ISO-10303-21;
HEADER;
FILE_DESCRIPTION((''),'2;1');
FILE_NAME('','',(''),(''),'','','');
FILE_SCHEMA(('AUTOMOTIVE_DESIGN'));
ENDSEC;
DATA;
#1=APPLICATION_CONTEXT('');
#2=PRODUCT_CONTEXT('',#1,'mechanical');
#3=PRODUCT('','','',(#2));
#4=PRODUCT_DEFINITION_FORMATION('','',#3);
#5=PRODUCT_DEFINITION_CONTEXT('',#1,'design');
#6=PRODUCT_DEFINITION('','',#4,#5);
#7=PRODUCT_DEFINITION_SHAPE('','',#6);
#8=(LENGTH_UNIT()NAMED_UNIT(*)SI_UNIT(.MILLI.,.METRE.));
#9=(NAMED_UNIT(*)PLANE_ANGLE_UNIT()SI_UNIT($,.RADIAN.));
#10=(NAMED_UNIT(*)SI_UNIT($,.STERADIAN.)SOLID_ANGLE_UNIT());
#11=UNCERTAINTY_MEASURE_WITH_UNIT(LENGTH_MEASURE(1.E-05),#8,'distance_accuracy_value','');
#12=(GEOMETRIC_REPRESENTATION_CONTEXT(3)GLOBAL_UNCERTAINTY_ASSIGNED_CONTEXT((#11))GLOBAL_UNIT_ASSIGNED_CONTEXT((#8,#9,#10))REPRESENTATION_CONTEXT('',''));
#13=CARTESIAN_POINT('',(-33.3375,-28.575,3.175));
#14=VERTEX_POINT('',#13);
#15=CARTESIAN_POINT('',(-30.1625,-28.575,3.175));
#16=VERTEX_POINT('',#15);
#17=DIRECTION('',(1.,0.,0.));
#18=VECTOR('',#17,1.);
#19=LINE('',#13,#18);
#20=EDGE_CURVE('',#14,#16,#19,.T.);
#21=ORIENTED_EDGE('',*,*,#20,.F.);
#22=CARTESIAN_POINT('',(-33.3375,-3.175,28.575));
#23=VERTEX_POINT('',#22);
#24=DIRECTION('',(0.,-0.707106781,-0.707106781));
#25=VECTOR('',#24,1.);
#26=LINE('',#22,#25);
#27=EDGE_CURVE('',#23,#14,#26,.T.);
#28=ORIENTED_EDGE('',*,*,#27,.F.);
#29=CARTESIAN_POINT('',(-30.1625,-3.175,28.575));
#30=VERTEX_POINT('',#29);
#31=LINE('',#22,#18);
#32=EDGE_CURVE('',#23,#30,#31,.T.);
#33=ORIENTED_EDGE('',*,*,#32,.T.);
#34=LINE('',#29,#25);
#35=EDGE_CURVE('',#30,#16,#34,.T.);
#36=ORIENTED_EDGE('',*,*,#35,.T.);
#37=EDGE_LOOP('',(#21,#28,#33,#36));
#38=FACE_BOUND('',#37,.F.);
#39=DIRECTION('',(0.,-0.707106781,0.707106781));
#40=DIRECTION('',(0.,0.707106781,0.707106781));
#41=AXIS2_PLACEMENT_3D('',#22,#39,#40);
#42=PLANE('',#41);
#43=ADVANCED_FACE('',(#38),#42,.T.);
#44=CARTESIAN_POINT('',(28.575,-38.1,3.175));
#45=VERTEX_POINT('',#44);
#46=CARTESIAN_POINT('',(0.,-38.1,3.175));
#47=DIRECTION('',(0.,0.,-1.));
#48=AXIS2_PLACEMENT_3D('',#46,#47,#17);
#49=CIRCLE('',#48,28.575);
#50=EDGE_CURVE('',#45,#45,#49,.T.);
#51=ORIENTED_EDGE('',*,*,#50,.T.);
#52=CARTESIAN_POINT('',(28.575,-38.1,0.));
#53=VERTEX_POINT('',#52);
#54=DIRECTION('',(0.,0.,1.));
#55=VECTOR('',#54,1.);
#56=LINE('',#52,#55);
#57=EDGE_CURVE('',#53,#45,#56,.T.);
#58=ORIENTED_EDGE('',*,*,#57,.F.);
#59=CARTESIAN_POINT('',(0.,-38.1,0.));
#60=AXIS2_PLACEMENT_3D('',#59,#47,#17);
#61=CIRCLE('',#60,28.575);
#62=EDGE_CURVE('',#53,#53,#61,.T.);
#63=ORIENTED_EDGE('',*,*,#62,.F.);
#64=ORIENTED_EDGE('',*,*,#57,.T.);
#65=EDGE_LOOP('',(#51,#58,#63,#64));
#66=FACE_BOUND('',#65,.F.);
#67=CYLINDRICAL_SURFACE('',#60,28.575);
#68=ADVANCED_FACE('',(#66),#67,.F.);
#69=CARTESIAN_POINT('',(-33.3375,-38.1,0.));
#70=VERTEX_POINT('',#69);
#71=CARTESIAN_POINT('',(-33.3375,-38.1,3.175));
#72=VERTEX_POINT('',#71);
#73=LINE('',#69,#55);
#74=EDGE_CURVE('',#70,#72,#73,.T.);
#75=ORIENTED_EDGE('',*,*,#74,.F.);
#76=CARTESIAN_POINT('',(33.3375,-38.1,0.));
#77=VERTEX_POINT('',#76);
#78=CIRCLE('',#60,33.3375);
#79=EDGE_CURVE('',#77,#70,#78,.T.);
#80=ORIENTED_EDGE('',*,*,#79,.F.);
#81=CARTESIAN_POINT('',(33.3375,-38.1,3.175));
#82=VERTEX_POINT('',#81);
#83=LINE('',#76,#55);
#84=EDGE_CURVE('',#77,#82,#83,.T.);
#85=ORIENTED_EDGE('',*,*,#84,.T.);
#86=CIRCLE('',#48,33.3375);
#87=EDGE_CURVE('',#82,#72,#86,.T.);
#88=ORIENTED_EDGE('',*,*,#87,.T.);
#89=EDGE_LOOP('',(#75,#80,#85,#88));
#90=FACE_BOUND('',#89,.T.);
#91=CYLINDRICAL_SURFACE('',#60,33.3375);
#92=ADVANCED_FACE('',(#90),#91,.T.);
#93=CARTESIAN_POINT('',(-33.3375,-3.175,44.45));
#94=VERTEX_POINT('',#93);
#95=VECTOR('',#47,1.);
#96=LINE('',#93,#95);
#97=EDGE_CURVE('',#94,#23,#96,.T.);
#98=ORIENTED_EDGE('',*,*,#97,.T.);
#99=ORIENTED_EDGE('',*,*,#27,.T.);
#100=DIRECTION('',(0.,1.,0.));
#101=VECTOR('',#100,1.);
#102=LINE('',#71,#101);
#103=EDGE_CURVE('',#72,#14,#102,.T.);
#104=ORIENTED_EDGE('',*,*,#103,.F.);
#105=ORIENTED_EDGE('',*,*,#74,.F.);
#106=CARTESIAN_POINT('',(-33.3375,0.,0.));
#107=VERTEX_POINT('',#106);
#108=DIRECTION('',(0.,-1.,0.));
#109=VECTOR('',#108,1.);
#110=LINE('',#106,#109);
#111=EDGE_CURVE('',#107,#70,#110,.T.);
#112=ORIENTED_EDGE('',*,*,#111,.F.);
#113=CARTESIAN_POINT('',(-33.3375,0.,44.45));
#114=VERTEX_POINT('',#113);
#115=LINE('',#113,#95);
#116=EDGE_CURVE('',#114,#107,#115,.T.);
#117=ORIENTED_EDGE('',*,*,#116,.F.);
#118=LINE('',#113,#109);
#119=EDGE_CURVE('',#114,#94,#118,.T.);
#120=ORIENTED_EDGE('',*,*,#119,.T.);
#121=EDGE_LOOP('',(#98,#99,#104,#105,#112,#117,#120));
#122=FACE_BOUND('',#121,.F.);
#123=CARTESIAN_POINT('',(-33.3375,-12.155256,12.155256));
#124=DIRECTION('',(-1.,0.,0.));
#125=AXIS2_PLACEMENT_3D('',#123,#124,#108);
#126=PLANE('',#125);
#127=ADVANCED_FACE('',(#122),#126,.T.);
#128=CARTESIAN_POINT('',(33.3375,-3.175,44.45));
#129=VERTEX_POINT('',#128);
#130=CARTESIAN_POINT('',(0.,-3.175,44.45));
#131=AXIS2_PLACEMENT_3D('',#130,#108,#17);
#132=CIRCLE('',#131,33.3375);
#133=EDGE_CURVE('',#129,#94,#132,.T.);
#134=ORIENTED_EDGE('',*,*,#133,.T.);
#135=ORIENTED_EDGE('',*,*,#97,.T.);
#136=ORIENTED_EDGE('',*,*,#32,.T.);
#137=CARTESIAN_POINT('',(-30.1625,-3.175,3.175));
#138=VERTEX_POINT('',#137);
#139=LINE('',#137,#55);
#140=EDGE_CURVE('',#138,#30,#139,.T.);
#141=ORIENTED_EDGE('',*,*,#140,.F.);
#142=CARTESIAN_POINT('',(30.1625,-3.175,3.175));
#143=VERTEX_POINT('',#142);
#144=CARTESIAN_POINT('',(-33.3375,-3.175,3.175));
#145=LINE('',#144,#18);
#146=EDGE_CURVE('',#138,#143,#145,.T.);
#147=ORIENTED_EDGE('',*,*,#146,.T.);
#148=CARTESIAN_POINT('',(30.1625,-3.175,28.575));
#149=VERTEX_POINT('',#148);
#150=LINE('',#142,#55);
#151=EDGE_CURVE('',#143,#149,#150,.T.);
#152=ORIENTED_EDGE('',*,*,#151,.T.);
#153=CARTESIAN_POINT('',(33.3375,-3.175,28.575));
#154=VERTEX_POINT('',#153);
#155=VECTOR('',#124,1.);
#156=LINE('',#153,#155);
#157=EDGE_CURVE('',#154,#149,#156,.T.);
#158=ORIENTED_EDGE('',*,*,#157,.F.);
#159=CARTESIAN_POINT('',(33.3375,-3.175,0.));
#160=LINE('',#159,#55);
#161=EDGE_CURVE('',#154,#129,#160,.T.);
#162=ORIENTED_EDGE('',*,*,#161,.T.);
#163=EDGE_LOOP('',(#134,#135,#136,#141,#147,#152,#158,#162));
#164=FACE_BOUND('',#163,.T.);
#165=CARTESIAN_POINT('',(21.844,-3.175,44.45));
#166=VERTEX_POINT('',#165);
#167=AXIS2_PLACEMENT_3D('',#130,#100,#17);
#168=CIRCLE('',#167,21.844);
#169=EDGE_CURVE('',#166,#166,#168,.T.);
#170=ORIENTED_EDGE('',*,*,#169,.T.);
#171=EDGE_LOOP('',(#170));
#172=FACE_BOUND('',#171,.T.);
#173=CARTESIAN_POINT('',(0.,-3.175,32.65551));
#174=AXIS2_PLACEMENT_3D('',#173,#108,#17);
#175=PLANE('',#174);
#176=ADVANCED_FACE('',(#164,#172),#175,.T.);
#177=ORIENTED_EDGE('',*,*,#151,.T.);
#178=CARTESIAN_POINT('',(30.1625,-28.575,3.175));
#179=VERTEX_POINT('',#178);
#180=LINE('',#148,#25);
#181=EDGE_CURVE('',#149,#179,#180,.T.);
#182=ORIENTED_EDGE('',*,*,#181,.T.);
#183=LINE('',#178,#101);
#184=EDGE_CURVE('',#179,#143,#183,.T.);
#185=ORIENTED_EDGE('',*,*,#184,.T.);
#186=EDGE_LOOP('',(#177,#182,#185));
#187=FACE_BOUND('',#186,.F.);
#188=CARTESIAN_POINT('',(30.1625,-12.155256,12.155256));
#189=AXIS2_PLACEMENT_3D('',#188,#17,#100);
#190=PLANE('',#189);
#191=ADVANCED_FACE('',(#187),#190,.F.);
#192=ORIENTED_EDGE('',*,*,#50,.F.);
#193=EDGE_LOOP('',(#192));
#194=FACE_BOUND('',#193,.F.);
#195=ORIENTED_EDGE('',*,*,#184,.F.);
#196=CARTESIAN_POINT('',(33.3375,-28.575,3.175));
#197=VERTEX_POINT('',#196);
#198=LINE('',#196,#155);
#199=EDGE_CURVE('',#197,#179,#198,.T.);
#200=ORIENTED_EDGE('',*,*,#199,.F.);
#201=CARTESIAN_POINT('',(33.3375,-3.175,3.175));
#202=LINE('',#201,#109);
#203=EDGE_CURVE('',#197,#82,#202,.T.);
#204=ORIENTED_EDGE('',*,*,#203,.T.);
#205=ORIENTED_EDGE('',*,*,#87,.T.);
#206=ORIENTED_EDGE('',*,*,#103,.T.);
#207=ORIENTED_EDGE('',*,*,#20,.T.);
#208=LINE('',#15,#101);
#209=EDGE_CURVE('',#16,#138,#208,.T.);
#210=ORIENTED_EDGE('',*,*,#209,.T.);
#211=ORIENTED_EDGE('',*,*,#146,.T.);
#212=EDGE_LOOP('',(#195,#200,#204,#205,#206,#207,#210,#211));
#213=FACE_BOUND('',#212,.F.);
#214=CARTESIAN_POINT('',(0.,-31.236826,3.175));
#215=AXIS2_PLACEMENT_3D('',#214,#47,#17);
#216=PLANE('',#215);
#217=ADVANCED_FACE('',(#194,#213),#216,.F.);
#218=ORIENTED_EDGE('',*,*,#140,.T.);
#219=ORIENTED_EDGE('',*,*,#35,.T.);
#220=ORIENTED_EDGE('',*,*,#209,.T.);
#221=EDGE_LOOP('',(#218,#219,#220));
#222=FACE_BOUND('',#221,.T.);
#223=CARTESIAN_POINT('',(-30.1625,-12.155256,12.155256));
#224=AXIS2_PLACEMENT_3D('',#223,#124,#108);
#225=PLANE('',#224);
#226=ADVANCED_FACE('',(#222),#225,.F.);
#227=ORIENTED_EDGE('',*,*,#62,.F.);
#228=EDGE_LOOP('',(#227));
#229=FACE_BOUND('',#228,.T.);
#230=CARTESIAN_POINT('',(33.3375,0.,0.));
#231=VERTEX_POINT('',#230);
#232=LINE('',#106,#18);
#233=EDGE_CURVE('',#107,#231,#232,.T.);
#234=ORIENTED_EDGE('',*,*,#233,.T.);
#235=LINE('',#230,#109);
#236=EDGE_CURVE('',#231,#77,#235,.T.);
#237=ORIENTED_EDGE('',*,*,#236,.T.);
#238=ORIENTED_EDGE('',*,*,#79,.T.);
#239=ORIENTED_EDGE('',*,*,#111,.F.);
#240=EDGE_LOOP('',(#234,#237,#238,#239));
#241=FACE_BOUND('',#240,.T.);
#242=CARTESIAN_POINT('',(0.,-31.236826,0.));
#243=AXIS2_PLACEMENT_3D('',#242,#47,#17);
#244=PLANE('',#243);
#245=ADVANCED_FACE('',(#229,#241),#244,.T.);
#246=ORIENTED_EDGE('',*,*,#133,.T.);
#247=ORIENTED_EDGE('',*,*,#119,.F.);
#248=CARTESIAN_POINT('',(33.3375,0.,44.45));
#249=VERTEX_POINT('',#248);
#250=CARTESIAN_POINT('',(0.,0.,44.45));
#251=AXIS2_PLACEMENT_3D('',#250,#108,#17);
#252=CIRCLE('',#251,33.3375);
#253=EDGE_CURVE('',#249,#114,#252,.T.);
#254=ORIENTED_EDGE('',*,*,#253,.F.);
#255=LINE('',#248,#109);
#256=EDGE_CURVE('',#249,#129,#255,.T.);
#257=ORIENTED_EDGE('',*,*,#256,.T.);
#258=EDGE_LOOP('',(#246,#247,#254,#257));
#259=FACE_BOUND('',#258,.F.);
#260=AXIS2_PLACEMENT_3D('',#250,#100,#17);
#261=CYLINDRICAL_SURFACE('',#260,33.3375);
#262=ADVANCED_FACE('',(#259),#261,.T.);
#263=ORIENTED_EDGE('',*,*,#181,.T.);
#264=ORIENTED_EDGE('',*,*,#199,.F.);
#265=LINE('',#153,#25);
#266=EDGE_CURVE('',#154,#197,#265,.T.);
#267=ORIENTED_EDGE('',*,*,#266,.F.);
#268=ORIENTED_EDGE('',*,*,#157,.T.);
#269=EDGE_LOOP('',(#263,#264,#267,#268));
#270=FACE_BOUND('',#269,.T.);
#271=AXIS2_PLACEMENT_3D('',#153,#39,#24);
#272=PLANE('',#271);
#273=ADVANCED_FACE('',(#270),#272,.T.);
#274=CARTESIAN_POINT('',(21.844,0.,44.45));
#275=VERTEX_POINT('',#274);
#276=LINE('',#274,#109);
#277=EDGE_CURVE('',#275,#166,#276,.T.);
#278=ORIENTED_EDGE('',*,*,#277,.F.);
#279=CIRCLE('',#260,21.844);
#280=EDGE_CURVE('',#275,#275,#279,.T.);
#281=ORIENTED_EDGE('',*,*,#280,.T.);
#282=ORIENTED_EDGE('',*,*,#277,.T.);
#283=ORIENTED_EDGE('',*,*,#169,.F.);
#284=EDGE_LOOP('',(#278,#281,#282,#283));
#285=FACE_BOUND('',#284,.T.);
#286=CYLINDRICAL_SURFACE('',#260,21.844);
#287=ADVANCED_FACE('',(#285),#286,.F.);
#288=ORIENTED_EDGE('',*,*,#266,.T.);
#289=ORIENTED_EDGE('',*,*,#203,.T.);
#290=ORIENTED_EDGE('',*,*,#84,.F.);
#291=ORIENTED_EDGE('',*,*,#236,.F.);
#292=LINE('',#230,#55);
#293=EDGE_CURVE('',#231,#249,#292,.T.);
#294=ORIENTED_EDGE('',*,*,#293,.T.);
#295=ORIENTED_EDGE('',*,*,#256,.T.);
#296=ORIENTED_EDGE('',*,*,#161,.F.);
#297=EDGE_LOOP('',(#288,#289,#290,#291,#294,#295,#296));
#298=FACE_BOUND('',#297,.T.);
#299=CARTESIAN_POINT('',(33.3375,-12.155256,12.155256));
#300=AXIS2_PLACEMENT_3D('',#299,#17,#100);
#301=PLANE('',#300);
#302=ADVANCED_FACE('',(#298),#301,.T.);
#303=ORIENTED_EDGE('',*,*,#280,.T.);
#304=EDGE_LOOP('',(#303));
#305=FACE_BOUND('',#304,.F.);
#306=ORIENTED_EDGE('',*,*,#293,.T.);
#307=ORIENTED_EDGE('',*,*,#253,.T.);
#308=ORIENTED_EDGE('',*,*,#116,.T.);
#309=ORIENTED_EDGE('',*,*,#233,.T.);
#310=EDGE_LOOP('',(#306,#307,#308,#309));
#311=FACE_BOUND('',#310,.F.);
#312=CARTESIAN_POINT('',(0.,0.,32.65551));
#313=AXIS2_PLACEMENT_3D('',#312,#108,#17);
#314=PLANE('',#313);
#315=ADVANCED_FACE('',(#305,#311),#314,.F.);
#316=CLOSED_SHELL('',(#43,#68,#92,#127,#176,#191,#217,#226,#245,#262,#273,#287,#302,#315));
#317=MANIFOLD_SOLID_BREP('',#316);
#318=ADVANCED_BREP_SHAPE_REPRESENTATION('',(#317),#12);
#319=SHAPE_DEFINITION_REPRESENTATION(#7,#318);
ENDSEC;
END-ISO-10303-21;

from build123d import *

# Parameters (mm, degrees)
F1_R     = 21.844
F2_DEPTH = 3.175
F3_R     = 28.575
F4_DEPTH = 3.175
F6_DEPTH = 3.175


# Not quite as in the source:
# - a variable given as a bare number and used for a length is read in inches; the dataset says mm whatever the document's units were


with BuildPart() as f2:
    # F1 (on Front) → F2 (new body)
    with BuildSketch(Plane.XZ):
        with BuildLine():
            Line((33.3375, 0), (33.3375, 44.45))
            ThreePointArc((33.3375, 44.45), (0, 77.7875), (-33.3375, 44.45))
            Line((-33.3375, 44.45), (-33.3375, 0))
            Line((-33.3375, 0), (33.3375, 0))
        make_face()
        with Locations((0, 44.45)):
            Circle(F1_R, mode=Mode.SUBTRACT)
    extrude(amount=F2_DEPTH)

    # F3 (on face) → F4 (join)
    with BuildSketch(Plane(origin=(0, 0, 0), x_dir=(1, 0, 0), z_dir=(0, 0, -1))):
        with BuildLine():
            Line((-33.3375, 38.1), (-33.3375, 3.175))
            Line((-33.3375, 3.175), (33.3375, 3.175))
            Line((33.3375, 3.175), (33.3375, 38.1))
            ThreePointArc((33.3375, 38.1), (0, 71.4375), (-33.3375, 38.1))
        make_face()
        with Locations((0, 38.1)):
            Circle(F3_R, mode=Mode.SUBTRACT)
    extrude(amount=-F4_DEPTH)

    # F5 (on face) → F6 (join)
    with BuildSketch(Plane.YZ.offset(33.3375)):
        Polygon((-3.175, 3.175), (-3.175, 28.575), (-28.575, 3.175), align=None)
    extrude(amount=-F6_DEPTH)

    # F7: F2 across plane


with BuildPart() as f2_1:
    add(f2.part)
    add(f2.part.mirror(Plane.YZ))


solid = f2_1.part
